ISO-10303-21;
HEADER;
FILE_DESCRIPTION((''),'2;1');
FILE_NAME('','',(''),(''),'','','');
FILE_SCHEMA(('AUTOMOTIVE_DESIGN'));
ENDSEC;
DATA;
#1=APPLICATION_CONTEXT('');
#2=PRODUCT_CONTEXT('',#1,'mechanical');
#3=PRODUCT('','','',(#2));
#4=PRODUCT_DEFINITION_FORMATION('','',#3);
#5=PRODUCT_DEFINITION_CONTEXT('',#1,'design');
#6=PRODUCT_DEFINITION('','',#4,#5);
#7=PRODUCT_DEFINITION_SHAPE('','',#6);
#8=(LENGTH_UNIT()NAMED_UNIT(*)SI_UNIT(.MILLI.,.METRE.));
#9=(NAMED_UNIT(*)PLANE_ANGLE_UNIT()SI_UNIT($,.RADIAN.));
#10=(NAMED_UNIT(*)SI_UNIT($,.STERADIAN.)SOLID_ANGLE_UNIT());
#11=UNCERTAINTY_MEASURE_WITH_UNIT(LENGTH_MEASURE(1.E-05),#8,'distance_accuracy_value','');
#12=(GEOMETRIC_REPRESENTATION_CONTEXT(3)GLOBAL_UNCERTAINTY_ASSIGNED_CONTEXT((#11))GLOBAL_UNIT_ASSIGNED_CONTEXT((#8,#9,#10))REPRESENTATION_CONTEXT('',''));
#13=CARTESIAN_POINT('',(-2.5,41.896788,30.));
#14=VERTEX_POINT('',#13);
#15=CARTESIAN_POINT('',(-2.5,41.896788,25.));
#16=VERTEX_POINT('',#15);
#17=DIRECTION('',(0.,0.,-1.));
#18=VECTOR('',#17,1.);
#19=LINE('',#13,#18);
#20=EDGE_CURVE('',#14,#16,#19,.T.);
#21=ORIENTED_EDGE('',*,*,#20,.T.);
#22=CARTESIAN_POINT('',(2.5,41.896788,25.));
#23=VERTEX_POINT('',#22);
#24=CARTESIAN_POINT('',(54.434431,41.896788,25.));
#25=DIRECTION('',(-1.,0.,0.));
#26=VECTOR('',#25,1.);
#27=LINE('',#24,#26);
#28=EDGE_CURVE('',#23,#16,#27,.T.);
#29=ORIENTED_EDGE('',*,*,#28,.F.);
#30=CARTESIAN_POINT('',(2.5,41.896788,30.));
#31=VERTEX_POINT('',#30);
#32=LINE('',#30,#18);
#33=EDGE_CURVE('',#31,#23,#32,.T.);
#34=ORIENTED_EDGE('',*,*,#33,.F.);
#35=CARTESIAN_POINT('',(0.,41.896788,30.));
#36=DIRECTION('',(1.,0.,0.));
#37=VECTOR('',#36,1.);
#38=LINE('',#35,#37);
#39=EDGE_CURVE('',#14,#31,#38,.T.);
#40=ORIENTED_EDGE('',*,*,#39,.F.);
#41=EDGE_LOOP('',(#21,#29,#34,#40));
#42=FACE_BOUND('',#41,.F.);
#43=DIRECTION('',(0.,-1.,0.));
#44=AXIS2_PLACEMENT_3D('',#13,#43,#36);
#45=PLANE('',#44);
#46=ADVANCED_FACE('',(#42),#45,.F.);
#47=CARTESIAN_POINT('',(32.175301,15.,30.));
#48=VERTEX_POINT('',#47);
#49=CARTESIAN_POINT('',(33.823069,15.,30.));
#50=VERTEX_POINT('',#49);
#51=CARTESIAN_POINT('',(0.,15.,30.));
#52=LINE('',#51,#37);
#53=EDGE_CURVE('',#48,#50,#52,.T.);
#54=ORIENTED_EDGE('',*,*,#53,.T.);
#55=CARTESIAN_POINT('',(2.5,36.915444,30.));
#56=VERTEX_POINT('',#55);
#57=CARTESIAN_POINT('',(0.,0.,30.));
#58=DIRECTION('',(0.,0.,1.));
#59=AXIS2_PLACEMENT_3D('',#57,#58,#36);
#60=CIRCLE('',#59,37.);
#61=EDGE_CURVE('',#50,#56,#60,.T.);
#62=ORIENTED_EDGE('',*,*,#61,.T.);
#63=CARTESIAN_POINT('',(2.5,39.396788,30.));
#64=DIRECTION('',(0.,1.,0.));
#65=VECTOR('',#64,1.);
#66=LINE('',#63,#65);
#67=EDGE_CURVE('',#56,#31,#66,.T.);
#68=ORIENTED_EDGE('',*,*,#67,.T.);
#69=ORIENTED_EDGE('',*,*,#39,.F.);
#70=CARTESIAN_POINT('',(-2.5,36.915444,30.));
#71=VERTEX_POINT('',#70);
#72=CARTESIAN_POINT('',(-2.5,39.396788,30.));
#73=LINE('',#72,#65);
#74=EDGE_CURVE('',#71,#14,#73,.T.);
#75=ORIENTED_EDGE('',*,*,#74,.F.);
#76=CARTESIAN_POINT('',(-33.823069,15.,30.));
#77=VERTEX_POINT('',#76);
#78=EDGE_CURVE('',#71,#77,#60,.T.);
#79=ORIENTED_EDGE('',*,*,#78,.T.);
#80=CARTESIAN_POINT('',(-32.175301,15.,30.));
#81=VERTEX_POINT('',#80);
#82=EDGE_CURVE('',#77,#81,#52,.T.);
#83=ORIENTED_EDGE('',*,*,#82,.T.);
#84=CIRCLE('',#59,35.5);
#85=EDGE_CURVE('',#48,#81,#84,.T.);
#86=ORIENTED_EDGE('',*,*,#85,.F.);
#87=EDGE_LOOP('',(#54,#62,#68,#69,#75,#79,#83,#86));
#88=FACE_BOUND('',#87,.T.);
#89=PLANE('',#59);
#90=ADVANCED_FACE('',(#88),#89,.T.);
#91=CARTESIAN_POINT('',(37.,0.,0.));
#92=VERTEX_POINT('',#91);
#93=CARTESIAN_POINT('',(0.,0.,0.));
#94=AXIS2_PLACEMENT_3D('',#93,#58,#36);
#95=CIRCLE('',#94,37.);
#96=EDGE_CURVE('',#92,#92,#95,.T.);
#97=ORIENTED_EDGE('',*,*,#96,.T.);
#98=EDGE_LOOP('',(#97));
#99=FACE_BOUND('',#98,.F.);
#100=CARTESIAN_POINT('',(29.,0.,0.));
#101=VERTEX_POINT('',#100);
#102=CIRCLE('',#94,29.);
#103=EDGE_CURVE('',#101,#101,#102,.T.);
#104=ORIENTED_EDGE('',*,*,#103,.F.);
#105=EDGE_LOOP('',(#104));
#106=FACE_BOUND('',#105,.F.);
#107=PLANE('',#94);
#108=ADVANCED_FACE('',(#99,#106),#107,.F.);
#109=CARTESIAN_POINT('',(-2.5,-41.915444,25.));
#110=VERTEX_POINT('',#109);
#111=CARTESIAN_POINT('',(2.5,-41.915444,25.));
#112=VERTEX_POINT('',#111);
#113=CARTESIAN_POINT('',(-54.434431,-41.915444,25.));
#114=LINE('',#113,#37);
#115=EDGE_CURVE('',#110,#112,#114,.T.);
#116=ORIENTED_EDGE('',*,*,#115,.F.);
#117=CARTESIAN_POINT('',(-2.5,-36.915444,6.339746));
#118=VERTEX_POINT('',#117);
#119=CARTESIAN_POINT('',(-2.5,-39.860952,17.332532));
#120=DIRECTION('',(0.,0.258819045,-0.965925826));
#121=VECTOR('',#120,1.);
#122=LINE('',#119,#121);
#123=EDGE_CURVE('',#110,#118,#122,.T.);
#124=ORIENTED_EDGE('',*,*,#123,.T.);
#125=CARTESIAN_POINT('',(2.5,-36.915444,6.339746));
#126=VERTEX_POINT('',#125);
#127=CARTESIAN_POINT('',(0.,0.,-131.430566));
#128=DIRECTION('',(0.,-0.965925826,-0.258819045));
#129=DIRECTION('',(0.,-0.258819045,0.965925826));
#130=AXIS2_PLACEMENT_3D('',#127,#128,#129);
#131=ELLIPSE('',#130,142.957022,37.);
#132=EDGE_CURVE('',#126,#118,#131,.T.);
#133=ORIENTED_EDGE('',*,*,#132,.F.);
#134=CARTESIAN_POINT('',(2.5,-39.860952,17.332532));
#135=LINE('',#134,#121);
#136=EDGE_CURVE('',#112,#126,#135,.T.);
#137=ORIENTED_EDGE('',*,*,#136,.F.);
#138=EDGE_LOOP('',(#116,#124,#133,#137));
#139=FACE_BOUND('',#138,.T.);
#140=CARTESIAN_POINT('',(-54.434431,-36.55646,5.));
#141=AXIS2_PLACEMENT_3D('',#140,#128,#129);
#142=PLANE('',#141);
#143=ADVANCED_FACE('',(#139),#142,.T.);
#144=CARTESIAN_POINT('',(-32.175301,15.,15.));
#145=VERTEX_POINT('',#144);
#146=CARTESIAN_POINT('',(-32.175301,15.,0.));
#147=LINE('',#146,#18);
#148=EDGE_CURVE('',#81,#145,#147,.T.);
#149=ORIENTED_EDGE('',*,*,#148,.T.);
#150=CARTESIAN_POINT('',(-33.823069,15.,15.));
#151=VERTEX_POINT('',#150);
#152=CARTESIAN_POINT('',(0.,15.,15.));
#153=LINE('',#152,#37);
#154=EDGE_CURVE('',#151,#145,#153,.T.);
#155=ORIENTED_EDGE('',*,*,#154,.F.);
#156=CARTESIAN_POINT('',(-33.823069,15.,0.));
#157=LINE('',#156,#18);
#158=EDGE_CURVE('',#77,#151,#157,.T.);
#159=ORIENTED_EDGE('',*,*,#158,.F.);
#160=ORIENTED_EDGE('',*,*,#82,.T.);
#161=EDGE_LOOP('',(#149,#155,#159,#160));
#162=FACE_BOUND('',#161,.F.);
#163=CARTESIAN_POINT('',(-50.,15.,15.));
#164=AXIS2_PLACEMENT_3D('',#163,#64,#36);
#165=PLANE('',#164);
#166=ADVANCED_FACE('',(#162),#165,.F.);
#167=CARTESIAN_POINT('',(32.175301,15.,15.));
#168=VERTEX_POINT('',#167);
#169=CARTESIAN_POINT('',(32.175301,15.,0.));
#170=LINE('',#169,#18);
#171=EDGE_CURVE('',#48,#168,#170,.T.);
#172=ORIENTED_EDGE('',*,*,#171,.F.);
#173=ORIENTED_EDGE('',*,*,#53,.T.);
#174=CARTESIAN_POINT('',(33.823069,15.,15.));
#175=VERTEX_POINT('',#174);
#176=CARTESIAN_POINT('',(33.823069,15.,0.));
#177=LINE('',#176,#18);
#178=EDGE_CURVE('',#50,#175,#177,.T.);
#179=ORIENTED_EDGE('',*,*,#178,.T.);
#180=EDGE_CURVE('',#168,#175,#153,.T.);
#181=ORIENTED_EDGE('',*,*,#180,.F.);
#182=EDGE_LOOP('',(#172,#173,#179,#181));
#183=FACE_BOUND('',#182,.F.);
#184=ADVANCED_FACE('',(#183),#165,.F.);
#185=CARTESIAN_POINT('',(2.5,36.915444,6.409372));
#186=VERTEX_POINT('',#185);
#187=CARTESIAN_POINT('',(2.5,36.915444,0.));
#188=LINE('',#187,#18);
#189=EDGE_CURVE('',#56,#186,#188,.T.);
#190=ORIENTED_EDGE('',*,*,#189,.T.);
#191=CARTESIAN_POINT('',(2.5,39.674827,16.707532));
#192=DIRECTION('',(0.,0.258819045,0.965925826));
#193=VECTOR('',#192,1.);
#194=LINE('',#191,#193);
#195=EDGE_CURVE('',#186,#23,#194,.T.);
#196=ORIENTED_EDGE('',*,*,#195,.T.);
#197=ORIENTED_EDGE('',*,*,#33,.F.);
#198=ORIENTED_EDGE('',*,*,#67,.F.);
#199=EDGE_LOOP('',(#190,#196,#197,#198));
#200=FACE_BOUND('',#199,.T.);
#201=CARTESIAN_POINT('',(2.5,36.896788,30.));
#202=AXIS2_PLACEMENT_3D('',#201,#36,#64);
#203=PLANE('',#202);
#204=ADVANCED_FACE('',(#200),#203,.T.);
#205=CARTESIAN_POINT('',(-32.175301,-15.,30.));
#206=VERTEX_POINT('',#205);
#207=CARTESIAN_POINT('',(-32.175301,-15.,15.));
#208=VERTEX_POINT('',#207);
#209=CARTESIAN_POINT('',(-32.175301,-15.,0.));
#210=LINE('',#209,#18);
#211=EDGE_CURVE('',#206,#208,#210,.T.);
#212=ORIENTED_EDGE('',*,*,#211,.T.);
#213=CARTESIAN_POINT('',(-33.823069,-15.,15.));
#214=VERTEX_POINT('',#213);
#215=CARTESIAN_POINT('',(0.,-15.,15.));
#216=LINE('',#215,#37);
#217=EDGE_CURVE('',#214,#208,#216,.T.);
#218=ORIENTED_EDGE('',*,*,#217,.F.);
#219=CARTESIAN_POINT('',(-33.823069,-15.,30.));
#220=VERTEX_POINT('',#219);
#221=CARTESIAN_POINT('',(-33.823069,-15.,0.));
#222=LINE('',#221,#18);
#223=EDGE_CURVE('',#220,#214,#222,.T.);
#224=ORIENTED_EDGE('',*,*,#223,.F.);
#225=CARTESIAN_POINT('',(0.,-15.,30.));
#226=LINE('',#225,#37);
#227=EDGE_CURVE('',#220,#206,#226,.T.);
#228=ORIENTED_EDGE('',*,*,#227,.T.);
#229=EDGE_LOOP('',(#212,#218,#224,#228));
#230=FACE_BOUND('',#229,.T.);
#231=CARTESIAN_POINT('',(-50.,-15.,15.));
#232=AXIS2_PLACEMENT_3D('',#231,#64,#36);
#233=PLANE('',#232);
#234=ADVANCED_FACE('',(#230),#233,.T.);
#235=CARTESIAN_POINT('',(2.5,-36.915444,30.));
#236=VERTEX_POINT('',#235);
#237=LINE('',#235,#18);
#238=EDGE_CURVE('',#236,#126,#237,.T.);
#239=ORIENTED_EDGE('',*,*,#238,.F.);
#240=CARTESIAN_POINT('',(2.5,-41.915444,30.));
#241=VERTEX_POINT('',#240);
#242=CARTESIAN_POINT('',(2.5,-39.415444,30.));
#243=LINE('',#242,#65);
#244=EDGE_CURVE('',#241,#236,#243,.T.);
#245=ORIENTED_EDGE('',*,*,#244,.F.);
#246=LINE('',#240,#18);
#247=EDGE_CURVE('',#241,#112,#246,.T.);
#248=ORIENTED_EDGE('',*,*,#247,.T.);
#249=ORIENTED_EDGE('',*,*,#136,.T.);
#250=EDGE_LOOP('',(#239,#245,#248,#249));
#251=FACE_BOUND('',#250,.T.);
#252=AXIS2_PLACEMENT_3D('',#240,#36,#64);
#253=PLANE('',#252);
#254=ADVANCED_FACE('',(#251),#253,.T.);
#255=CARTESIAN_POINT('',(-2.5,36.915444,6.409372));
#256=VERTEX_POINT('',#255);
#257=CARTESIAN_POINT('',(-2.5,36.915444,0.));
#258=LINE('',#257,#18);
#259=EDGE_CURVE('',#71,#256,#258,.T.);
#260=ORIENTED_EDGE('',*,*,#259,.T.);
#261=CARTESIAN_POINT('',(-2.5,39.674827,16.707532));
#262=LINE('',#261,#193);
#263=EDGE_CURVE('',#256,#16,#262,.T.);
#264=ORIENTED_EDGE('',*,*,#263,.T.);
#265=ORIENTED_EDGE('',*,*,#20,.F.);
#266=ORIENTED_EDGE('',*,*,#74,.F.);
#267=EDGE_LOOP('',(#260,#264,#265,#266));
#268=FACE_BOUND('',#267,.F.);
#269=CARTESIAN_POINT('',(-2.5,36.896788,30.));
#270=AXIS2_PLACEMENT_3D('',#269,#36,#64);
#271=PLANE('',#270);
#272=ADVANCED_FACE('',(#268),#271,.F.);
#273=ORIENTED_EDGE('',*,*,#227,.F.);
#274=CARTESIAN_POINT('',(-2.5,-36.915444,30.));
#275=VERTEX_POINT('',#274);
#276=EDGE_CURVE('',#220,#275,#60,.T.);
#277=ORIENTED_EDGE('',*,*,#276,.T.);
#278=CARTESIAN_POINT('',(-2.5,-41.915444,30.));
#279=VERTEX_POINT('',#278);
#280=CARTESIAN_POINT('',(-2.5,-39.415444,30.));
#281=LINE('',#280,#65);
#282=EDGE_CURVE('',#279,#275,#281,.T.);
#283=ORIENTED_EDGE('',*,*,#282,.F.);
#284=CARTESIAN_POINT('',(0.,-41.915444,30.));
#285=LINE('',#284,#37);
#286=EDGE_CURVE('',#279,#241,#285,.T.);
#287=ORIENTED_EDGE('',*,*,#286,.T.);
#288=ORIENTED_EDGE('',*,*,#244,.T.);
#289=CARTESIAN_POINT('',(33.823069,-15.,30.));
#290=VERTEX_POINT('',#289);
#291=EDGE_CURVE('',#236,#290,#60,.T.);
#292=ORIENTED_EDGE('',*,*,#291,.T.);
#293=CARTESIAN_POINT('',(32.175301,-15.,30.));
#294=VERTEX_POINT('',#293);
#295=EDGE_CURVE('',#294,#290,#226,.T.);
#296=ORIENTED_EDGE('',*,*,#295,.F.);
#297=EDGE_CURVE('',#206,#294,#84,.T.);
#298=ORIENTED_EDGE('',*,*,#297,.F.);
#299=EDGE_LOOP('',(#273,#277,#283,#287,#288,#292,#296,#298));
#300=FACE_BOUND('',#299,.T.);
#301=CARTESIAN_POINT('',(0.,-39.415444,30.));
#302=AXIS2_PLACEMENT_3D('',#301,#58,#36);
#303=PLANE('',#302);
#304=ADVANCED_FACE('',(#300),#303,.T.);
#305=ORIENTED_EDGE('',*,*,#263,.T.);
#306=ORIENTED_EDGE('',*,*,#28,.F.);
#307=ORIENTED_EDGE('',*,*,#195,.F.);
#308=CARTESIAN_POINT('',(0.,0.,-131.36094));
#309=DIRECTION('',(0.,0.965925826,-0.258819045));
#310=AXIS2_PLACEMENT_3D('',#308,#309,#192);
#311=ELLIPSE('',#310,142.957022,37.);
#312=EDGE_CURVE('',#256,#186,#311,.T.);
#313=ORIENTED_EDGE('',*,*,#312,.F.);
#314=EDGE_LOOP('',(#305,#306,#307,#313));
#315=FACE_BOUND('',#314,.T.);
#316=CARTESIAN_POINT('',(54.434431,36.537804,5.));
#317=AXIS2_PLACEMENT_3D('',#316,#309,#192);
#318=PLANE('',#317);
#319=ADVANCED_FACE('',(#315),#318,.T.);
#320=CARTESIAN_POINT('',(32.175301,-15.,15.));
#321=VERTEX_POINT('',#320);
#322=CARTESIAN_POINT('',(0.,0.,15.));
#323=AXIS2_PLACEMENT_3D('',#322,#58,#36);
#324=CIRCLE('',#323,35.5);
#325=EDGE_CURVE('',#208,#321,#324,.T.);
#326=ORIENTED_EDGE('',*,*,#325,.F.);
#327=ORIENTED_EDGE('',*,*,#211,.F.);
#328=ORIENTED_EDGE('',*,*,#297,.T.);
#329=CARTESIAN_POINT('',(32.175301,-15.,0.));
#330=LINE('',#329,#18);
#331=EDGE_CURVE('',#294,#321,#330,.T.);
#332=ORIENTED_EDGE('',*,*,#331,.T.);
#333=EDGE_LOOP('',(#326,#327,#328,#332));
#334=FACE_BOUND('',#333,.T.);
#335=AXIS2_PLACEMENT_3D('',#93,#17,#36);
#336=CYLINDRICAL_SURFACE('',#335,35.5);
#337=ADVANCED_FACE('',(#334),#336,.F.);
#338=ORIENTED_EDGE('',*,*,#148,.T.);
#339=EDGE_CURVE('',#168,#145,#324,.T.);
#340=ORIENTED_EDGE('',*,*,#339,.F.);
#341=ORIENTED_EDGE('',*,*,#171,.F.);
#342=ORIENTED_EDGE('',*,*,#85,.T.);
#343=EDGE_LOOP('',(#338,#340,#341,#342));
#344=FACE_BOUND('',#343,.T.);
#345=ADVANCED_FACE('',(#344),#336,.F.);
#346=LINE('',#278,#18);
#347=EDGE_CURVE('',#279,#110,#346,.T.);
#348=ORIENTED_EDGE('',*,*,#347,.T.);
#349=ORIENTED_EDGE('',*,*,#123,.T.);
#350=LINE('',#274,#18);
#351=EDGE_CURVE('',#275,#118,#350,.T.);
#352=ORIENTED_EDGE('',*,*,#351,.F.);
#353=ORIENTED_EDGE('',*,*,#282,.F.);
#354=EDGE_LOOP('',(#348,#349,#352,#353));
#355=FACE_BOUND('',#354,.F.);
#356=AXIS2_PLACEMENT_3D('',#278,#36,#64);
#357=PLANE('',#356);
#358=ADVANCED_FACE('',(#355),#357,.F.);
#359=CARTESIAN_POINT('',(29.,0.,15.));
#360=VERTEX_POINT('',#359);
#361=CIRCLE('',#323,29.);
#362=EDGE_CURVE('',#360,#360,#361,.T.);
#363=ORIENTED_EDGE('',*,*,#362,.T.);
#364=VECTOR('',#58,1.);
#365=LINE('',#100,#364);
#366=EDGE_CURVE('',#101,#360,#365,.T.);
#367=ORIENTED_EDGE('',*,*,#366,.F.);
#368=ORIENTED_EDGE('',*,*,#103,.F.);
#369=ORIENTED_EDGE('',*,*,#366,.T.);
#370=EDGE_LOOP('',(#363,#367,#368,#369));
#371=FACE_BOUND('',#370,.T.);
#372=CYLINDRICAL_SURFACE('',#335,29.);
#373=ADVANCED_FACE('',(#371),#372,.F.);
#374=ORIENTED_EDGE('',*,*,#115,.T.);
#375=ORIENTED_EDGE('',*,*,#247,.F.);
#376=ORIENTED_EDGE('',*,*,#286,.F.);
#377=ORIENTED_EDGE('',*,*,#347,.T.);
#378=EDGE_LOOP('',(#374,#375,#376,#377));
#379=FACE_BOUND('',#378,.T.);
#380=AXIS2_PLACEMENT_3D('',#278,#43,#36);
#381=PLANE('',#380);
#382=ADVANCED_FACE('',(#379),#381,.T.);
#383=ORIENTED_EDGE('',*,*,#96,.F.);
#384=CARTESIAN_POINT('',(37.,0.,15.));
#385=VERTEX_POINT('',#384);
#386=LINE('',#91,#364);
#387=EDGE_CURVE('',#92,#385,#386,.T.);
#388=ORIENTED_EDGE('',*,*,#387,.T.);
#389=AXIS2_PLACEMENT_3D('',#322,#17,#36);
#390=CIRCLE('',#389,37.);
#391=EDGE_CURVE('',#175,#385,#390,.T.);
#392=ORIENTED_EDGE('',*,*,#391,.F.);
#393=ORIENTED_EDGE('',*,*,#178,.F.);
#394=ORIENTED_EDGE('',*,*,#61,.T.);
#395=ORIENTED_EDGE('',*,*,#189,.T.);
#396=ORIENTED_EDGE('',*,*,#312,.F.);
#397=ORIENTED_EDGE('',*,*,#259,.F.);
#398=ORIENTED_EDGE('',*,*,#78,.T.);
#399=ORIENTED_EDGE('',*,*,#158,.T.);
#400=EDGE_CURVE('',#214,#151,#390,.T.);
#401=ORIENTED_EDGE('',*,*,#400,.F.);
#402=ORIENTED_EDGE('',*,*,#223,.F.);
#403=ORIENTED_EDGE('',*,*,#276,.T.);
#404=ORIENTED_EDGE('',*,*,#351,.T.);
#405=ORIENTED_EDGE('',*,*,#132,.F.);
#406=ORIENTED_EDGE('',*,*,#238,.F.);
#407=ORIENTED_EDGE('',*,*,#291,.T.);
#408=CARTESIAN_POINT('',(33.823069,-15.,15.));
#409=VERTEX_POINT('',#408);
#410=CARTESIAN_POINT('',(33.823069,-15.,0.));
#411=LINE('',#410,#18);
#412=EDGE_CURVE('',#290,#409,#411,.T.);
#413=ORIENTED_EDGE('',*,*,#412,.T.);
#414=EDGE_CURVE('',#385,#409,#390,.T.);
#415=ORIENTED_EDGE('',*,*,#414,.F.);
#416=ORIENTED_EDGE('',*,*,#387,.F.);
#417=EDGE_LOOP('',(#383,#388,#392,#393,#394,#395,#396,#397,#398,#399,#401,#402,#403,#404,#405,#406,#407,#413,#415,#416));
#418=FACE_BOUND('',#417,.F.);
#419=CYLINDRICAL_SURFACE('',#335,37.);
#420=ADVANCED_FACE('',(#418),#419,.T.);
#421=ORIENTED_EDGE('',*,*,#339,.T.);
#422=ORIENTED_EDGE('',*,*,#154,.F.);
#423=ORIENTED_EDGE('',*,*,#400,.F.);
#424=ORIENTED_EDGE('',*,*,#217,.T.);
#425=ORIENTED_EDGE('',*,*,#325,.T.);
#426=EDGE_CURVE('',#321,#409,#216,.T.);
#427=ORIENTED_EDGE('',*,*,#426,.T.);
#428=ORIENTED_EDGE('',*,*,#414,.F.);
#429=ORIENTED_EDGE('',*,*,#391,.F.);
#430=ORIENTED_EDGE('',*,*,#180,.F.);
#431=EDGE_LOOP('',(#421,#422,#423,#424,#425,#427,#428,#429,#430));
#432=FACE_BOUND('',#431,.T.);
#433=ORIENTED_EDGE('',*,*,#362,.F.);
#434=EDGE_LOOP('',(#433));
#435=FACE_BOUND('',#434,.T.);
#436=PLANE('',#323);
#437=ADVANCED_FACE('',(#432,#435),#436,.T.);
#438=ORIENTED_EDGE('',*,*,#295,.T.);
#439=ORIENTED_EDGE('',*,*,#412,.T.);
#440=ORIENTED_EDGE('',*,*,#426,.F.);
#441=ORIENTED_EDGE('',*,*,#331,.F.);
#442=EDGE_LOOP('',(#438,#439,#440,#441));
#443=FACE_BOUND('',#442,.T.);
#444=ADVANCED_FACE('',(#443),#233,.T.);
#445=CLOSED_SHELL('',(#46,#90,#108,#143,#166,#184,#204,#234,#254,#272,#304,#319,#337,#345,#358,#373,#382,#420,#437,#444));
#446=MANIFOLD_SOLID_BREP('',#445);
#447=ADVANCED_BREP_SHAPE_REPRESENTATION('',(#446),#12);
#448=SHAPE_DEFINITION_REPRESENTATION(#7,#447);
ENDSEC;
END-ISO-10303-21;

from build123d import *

# Parameters (mm, degrees)
F0_R         = 37
F0_R_2       = 35.5
F1_DEPTH     = 30
F2_W         = 100
F2_H         = 30
F3_DEPTH     = 15
F6_R         = 35.5
F6_R_2       = 29
F7_DEPTH     = 15
F8_W         = 5
F8_H         = 5
F9_DEPTH     = 25
F10_T4_DEPTH = 108.868862808
F10_S5_R     = 37
F10_T6_DEPTH = 57
F11_W        = 5
F11_H        = 5
F12_DEPTH    = 25
F13_T4_DEPTH = 108.868862808
F13_S5_R     = 37
F13_T6_DEPTH = 57


# Not quite as in the source:
# - a fillet or chamfer that OpenCascade refuses, or shapes differently, is made with other operations: its cross-section is extruded or revolved along the edge and cut away or added


with BuildPart() as f1:
    # F0 (on Top) → F1 (new body)
    with BuildSketch(Plane.XY):
        Circle(F0_R)
        Circle(F0_R_2, mode=Mode.SUBTRACT)
    extrude(amount=F1_DEPTH)


with BuildPart() as f3:
    # F2 (on Top) → F3 (new body)
    with BuildSketch(Plane.XY):
        Rectangle(F2_W, F2_H)
    extrude(amount=F3_DEPTH)


with BuildPart() as f3_1:
    # F4: moved
    add(f3.part.moved(Location((0, 0, 15))))


with BuildPart() as f1_1:
    add(f1.part)

    # F5: cut F3
    add(f3_1.part, mode=Mode.SUBTRACT)

    # F6 (on Top) → F7 (join)
    with BuildSketch(Plane.XY):
        Circle(F6_R)
        Circle(F6_R_2, mode=Mode.SUBTRACT)
    extrude(amount=F7_DEPTH)

    # F8 (on face) → F9 (join)
    with BuildSketch(Plane.XY.offset(30)):
        with Locations((0, -39.4154439226)):
            Rectangle(F8_W, F8_H)
    extrude(amount=-F9_DEPTH)

    # F10: chamfer of 20 x 5.3589838486 on 1 edges, made by hand


with BuildPart() as f10_tool2:
    # F10_s3 → F10_t4 (new body)
    with BuildSketch(Plane.YZ.offset(-54.434431404)):
        Polygon((-36.5564600739, 5), (-41.9154439226, 25), (-41.9154439226, 5), align=None)
    extrude(amount=F10_T4_DEPTH)

    # F10_s5 → F10_t6 (cut, symmetric)
    with BuildSketch(Plane.XY.offset(15)):
        Circle(F10_S5_R)
    extrude(amount=F10_T6_DEPTH, both=True, mode=Mode.SUBTRACT)


with BuildPart() as f1_2:
    add(f1_1.part)

    # F10_t1: cut F10_tool2
    add(f10_tool2.part, mode=Mode.SUBTRACT)

    # F11 (on face) → F12 (join)
    with BuildSketch(Plane.XY.offset(30)):
        with Locations((0, 39.3967875838)):
            Rectangle(F11_W, F11_H)
    extrude(amount=-F12_DEPTH)

    # F13: chamfer of 20 x 5.3589838486 on 1 edges, made by hand


with BuildPart() as f13_tool2:
    # F13_s3 → F13_t4 (new body)
    with BuildSketch(Plane.YZ.offset(54.434431404)):
        Polygon((36.5378037352, 5), (41.8967875838, 25), (41.8967875838, 5), align=None)
    extrude(amount=-F13_T4_DEPTH)

    # F13_s5 → F13_t6 (cut, symmetric)
    with BuildSketch(Plane.XY.offset(15)):
        Circle(F13_S5_R)
    extrude(amount=F13_T6_DEPTH, both=True, mode=Mode.SUBTRACT)


with BuildPart() as f1_3:
    add(f1_2.part)

    # F13_t1: cut F13_tool2
    add(f13_tool2.part, mode=Mode.SUBTRACT)


solid = f1_3.part
